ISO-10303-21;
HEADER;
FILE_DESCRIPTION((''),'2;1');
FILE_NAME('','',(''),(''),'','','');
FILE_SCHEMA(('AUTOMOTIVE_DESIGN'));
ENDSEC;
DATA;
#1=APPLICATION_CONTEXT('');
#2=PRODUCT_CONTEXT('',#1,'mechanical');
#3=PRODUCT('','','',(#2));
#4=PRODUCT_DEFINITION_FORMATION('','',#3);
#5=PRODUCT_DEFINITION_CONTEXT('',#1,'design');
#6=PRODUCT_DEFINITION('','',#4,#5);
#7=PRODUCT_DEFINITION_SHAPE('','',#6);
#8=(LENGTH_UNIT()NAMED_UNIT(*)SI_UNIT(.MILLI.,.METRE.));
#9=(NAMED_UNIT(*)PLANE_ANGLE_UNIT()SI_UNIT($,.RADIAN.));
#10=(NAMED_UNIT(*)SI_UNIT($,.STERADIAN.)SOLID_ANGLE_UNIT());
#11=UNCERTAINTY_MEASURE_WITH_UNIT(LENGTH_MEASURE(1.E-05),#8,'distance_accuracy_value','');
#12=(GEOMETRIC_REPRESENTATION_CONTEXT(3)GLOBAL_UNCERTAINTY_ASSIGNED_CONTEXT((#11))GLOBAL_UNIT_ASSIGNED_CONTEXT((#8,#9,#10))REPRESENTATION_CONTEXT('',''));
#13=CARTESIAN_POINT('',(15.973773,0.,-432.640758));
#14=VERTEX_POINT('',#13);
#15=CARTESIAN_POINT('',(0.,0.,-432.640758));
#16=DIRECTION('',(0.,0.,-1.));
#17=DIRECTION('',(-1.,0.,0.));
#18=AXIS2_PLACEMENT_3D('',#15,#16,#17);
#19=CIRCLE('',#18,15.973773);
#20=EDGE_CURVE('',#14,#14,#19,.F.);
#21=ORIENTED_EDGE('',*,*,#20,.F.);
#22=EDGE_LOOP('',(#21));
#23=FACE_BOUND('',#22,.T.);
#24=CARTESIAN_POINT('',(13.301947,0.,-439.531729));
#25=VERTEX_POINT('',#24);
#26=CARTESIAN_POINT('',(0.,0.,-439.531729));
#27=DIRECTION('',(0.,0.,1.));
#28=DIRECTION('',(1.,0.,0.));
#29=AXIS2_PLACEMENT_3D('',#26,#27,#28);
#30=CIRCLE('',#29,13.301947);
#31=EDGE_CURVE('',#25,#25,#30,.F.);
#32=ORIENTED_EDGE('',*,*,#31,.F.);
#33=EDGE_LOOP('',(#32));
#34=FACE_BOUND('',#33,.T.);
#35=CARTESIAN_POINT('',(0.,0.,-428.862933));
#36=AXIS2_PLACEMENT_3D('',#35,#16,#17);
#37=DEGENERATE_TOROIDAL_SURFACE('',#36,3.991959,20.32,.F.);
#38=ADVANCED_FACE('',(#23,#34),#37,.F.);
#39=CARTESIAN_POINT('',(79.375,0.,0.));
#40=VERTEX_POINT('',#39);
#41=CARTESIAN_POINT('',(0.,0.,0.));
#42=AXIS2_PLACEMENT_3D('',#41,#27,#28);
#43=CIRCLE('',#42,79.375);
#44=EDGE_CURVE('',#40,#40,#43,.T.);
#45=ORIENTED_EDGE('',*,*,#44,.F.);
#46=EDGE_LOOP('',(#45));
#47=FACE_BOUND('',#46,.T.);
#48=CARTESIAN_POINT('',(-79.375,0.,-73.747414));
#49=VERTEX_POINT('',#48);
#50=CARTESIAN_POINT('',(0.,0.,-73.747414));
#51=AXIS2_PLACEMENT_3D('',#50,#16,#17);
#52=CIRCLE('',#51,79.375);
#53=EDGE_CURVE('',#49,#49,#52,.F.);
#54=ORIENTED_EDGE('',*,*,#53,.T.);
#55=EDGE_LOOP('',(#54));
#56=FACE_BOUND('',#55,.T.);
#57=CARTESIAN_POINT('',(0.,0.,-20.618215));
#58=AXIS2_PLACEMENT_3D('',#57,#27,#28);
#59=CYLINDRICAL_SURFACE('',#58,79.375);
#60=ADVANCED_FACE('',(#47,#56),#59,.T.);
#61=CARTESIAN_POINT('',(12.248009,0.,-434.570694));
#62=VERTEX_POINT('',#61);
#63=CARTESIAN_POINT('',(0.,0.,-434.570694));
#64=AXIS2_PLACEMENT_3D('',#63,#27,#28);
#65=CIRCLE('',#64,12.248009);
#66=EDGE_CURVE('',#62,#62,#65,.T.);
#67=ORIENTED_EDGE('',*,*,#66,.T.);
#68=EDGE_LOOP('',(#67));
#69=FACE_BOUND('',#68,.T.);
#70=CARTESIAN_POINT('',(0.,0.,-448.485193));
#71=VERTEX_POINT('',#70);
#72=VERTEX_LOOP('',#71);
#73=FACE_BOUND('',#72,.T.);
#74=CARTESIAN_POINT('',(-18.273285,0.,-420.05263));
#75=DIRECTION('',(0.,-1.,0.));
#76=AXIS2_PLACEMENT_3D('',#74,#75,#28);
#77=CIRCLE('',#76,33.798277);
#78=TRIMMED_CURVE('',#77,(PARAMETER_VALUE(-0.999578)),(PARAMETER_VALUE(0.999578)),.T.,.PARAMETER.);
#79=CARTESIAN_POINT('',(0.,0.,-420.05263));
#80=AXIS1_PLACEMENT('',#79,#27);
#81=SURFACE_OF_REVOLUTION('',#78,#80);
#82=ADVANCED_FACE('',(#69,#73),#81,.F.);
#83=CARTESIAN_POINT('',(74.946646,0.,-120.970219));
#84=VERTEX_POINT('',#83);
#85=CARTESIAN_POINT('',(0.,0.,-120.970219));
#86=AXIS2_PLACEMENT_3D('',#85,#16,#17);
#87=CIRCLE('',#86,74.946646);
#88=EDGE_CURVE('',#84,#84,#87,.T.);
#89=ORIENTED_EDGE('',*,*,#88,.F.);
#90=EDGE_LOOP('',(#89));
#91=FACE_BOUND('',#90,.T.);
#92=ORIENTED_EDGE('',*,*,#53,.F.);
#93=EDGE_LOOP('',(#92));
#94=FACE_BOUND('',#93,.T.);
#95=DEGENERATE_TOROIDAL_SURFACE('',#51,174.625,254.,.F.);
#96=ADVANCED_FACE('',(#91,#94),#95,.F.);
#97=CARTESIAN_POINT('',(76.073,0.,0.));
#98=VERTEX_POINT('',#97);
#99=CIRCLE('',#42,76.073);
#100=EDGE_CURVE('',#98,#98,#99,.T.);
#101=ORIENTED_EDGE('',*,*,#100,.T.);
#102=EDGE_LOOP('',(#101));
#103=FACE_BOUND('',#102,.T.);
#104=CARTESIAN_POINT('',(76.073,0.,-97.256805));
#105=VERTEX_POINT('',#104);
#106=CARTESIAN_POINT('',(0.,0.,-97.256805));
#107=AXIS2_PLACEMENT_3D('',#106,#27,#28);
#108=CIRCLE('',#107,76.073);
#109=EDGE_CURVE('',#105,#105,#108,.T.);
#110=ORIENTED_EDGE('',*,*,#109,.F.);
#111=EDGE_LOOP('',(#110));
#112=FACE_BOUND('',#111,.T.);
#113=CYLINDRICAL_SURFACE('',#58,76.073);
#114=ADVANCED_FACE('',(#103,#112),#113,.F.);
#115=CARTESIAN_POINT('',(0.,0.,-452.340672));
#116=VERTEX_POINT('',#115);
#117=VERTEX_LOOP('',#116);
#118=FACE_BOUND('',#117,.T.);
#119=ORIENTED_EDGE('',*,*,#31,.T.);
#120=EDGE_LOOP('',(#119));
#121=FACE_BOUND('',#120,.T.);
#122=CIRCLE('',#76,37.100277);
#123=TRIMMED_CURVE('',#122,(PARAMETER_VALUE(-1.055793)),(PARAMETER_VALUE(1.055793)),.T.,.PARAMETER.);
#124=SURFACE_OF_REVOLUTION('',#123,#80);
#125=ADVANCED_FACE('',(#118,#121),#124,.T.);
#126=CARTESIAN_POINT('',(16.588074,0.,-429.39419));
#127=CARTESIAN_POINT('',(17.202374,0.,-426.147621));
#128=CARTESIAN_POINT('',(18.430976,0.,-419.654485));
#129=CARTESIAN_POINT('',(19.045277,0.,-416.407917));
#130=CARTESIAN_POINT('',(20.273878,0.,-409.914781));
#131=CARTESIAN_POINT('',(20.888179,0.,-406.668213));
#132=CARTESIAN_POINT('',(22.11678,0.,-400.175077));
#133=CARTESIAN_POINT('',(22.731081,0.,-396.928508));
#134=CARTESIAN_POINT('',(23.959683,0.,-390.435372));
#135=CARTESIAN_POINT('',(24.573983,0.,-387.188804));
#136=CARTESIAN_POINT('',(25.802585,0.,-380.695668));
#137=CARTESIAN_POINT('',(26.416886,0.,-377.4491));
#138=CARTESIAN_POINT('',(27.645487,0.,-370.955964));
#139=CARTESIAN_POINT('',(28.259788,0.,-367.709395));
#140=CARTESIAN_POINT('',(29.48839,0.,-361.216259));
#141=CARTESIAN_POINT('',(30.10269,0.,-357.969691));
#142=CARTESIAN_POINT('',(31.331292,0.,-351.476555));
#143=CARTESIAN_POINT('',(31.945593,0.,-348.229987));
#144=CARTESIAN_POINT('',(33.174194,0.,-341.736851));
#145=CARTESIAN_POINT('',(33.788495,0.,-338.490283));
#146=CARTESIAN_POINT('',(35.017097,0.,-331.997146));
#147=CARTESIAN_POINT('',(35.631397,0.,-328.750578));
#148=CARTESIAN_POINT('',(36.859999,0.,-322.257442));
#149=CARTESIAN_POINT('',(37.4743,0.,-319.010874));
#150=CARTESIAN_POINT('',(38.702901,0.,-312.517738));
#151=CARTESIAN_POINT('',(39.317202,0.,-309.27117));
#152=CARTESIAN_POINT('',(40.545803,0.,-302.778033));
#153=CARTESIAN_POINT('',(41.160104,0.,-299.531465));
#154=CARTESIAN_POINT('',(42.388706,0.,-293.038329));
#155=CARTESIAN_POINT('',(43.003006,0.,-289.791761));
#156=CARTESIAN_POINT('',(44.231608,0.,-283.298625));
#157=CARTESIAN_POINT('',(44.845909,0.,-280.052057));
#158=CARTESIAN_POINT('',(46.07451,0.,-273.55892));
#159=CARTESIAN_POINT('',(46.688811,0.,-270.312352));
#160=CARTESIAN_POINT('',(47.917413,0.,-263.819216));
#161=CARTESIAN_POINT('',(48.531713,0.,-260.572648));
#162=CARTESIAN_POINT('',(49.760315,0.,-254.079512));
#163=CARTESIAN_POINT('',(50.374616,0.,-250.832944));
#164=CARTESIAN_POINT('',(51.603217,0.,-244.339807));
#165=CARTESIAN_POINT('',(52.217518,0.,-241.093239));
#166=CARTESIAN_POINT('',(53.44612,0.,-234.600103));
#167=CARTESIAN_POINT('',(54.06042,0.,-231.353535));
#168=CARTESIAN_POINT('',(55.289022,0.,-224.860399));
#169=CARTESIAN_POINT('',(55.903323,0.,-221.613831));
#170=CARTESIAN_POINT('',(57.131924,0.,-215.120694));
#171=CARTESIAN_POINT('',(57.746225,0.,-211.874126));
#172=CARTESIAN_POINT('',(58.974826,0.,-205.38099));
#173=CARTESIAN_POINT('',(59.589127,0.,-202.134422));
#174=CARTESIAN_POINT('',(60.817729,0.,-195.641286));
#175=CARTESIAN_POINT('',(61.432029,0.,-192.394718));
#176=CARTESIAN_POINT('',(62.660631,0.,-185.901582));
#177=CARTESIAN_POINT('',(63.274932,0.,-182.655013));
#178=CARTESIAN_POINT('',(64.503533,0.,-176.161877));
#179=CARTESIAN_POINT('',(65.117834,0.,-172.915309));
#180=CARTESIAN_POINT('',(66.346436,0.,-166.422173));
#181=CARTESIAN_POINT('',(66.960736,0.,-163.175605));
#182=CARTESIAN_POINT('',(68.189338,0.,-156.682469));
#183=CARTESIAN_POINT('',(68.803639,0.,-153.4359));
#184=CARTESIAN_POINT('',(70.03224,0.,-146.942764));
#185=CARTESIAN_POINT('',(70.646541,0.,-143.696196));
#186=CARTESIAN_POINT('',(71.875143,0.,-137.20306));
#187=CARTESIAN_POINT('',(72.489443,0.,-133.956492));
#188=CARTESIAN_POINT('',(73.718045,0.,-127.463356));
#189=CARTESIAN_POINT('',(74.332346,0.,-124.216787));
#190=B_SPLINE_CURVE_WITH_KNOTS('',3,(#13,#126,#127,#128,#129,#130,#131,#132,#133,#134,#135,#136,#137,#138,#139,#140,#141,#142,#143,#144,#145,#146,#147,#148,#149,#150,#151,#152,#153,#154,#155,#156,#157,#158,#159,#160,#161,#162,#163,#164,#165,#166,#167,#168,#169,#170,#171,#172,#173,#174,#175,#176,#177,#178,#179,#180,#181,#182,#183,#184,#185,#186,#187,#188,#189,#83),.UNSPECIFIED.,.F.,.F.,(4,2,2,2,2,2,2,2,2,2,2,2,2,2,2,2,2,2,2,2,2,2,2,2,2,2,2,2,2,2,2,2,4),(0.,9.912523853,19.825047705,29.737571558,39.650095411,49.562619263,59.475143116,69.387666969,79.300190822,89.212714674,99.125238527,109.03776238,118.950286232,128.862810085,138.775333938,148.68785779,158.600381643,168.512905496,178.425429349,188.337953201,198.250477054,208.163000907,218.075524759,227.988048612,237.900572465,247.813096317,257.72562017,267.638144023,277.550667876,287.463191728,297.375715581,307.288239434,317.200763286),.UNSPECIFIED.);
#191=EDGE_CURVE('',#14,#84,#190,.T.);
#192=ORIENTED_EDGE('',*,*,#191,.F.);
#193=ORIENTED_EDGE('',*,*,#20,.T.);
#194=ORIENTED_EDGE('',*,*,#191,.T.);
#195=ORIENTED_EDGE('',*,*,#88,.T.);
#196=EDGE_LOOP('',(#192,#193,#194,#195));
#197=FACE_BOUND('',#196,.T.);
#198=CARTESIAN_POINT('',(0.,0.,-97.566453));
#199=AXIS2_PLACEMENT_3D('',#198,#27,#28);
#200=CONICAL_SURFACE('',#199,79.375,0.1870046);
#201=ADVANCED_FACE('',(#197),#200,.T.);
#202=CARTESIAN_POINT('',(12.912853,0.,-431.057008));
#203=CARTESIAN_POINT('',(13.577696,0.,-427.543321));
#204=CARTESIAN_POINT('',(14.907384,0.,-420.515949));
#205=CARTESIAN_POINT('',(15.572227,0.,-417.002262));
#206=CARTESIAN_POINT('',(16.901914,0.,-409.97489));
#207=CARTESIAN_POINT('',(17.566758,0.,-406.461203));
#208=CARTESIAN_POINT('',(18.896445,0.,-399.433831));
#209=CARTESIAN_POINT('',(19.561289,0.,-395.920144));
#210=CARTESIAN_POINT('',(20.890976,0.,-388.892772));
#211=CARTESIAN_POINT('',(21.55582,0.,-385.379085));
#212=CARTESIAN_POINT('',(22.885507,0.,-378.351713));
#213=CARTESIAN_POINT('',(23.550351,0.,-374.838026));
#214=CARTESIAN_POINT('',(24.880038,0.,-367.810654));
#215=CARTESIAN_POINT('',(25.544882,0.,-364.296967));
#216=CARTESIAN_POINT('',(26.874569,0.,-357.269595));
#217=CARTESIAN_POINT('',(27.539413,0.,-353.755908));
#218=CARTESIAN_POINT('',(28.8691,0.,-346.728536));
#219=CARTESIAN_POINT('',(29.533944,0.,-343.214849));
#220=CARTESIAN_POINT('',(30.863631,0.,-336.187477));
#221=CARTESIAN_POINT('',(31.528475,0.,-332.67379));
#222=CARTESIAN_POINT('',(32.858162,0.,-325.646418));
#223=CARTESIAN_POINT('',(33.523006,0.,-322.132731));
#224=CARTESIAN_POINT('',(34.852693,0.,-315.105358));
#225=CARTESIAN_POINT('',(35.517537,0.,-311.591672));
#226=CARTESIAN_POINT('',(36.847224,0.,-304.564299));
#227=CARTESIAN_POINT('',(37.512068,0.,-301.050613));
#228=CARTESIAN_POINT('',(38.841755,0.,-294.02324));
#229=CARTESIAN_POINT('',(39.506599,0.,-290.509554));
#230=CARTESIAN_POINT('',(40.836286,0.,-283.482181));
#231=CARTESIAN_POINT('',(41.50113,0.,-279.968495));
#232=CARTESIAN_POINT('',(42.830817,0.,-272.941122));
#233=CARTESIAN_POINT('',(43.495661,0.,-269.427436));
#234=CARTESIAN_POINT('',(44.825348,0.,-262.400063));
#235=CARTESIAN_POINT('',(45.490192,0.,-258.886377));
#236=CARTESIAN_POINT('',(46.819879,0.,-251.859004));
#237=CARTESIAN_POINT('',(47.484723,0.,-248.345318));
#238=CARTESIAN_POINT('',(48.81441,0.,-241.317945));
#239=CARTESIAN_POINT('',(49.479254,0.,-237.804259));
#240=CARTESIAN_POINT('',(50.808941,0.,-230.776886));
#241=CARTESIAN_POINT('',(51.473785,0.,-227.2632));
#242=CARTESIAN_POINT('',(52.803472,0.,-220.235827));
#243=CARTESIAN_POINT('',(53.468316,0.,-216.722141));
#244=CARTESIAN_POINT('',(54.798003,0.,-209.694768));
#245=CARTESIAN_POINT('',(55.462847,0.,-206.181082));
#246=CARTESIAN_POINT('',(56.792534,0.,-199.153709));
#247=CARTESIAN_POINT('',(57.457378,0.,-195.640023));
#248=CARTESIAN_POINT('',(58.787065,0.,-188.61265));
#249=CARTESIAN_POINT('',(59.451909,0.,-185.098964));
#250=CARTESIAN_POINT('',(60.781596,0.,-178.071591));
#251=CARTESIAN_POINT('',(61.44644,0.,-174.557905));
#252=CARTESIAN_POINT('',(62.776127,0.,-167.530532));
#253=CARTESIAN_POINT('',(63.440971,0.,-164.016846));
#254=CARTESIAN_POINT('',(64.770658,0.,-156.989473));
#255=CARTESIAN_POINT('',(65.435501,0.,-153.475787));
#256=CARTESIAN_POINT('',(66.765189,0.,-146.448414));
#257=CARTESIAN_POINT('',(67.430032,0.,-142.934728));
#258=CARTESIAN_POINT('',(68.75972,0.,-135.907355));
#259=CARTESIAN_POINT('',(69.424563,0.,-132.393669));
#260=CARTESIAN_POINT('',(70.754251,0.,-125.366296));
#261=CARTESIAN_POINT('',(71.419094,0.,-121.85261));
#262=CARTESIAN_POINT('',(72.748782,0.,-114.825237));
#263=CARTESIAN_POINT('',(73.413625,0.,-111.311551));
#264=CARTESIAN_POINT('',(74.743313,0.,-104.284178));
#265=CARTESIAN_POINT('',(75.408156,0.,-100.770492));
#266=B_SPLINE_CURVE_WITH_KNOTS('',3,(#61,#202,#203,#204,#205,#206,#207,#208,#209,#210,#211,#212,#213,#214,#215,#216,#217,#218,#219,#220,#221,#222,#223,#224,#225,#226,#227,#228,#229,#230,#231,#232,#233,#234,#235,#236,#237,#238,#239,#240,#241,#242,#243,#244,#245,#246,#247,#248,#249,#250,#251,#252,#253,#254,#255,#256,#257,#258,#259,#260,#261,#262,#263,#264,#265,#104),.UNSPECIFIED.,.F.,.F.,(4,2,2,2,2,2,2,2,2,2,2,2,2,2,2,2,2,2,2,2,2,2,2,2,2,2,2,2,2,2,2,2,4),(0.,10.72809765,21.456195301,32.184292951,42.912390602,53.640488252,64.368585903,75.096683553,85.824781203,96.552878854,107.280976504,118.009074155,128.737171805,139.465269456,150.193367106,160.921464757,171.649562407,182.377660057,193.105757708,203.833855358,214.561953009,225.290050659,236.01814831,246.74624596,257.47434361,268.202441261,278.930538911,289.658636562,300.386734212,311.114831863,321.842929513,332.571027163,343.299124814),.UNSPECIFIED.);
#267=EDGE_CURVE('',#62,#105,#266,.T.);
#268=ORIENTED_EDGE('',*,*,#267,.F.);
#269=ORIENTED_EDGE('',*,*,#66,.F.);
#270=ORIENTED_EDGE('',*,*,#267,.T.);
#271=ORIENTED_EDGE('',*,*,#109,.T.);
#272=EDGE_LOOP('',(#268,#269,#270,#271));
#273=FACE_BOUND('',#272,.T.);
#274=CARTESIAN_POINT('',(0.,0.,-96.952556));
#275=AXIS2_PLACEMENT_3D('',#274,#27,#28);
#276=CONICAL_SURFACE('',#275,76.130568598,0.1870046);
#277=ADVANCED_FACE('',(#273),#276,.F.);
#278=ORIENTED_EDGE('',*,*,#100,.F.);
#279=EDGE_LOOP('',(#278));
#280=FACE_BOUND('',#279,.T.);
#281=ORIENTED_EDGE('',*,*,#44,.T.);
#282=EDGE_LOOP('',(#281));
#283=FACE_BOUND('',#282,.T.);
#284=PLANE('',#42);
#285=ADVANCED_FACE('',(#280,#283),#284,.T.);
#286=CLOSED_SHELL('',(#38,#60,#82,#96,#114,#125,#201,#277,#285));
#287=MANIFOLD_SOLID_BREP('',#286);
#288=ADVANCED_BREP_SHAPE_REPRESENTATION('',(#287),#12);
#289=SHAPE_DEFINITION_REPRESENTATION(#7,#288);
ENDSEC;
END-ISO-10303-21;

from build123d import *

# Parameters (mm, degrees)
FILLET1_R = 254
FILLET2_R = 20.32


# Read off the part's stored shape, not the designer's step: Shell1
with BuildPart() as part:
    # Sketch3 → Revolve1 (revolve)
    with BuildSketch(Plane(origin=(0, 0, 0), x_dir=(1, 0, 0), z_dir=(0, 1, 0))):
        with BuildLine():
            Line((79.375, 0), (79.375, 97.566452781))
            Line((79.375, 97.566452781), (15.414998094, 435.593871211))
            ThreePointArc((15.414998094, 435.593871211), (9.023509201, 445.178624931), (0, 452.340671834))
            Line((0, 452.340671834), (0, 431.8))
            Line((0, 431.8), (0, 0))
            Line((0, 0), (79.375, 0))
        make_face()
    revolve(axis=Axis((0, 0, -20.618215306), (0, 0, -1)))

    # Shell1 outline → Shell1 (revolve, cut)
    with BuildSketch(Plane.XZ):
        with BuildLine():
            add(Edge.make_bspline(
                [(0, -448.485192633), (8.107967388, -443.274294187), (12.248008898, -434.570694124)],
                knots=[5.283607214, 5.283607214, 5.283607214, 5.839190446, 5.839190446, 5.839190446], degree=2, weights=[1, 0.961663394, 1]))
            Line((12.248008898, -434.570694124), (76.073, -97.256805277))
            Line((76.073, -97.256805277), (76.073, 0))
            Line((76.073, 0), (0, 0))
            Line((0, 0), (0, -448.485192633))
        make_face()
    revolve(axis=Axis((0, 0, 0), (0, 0, 1)), mode=Mode.SUBTRACT)

    # Fillet1
    fillet1_edges = [part.edges().sort_by_distance(p)[0] for p in [
        (-79.375, 0, -97.566452781),
    ]]
    fillet(fillet1_edges, radius=FILLET1_R)

    # Fillet2
    fillet2_edges = [part.edges().sort_by_distance(p)[0] for p in [
        (-15.414998094, 0, -435.593871211),
    ]]
    fillet(fillet2_edges, radius=FILLET2_R)


solid = part.part
